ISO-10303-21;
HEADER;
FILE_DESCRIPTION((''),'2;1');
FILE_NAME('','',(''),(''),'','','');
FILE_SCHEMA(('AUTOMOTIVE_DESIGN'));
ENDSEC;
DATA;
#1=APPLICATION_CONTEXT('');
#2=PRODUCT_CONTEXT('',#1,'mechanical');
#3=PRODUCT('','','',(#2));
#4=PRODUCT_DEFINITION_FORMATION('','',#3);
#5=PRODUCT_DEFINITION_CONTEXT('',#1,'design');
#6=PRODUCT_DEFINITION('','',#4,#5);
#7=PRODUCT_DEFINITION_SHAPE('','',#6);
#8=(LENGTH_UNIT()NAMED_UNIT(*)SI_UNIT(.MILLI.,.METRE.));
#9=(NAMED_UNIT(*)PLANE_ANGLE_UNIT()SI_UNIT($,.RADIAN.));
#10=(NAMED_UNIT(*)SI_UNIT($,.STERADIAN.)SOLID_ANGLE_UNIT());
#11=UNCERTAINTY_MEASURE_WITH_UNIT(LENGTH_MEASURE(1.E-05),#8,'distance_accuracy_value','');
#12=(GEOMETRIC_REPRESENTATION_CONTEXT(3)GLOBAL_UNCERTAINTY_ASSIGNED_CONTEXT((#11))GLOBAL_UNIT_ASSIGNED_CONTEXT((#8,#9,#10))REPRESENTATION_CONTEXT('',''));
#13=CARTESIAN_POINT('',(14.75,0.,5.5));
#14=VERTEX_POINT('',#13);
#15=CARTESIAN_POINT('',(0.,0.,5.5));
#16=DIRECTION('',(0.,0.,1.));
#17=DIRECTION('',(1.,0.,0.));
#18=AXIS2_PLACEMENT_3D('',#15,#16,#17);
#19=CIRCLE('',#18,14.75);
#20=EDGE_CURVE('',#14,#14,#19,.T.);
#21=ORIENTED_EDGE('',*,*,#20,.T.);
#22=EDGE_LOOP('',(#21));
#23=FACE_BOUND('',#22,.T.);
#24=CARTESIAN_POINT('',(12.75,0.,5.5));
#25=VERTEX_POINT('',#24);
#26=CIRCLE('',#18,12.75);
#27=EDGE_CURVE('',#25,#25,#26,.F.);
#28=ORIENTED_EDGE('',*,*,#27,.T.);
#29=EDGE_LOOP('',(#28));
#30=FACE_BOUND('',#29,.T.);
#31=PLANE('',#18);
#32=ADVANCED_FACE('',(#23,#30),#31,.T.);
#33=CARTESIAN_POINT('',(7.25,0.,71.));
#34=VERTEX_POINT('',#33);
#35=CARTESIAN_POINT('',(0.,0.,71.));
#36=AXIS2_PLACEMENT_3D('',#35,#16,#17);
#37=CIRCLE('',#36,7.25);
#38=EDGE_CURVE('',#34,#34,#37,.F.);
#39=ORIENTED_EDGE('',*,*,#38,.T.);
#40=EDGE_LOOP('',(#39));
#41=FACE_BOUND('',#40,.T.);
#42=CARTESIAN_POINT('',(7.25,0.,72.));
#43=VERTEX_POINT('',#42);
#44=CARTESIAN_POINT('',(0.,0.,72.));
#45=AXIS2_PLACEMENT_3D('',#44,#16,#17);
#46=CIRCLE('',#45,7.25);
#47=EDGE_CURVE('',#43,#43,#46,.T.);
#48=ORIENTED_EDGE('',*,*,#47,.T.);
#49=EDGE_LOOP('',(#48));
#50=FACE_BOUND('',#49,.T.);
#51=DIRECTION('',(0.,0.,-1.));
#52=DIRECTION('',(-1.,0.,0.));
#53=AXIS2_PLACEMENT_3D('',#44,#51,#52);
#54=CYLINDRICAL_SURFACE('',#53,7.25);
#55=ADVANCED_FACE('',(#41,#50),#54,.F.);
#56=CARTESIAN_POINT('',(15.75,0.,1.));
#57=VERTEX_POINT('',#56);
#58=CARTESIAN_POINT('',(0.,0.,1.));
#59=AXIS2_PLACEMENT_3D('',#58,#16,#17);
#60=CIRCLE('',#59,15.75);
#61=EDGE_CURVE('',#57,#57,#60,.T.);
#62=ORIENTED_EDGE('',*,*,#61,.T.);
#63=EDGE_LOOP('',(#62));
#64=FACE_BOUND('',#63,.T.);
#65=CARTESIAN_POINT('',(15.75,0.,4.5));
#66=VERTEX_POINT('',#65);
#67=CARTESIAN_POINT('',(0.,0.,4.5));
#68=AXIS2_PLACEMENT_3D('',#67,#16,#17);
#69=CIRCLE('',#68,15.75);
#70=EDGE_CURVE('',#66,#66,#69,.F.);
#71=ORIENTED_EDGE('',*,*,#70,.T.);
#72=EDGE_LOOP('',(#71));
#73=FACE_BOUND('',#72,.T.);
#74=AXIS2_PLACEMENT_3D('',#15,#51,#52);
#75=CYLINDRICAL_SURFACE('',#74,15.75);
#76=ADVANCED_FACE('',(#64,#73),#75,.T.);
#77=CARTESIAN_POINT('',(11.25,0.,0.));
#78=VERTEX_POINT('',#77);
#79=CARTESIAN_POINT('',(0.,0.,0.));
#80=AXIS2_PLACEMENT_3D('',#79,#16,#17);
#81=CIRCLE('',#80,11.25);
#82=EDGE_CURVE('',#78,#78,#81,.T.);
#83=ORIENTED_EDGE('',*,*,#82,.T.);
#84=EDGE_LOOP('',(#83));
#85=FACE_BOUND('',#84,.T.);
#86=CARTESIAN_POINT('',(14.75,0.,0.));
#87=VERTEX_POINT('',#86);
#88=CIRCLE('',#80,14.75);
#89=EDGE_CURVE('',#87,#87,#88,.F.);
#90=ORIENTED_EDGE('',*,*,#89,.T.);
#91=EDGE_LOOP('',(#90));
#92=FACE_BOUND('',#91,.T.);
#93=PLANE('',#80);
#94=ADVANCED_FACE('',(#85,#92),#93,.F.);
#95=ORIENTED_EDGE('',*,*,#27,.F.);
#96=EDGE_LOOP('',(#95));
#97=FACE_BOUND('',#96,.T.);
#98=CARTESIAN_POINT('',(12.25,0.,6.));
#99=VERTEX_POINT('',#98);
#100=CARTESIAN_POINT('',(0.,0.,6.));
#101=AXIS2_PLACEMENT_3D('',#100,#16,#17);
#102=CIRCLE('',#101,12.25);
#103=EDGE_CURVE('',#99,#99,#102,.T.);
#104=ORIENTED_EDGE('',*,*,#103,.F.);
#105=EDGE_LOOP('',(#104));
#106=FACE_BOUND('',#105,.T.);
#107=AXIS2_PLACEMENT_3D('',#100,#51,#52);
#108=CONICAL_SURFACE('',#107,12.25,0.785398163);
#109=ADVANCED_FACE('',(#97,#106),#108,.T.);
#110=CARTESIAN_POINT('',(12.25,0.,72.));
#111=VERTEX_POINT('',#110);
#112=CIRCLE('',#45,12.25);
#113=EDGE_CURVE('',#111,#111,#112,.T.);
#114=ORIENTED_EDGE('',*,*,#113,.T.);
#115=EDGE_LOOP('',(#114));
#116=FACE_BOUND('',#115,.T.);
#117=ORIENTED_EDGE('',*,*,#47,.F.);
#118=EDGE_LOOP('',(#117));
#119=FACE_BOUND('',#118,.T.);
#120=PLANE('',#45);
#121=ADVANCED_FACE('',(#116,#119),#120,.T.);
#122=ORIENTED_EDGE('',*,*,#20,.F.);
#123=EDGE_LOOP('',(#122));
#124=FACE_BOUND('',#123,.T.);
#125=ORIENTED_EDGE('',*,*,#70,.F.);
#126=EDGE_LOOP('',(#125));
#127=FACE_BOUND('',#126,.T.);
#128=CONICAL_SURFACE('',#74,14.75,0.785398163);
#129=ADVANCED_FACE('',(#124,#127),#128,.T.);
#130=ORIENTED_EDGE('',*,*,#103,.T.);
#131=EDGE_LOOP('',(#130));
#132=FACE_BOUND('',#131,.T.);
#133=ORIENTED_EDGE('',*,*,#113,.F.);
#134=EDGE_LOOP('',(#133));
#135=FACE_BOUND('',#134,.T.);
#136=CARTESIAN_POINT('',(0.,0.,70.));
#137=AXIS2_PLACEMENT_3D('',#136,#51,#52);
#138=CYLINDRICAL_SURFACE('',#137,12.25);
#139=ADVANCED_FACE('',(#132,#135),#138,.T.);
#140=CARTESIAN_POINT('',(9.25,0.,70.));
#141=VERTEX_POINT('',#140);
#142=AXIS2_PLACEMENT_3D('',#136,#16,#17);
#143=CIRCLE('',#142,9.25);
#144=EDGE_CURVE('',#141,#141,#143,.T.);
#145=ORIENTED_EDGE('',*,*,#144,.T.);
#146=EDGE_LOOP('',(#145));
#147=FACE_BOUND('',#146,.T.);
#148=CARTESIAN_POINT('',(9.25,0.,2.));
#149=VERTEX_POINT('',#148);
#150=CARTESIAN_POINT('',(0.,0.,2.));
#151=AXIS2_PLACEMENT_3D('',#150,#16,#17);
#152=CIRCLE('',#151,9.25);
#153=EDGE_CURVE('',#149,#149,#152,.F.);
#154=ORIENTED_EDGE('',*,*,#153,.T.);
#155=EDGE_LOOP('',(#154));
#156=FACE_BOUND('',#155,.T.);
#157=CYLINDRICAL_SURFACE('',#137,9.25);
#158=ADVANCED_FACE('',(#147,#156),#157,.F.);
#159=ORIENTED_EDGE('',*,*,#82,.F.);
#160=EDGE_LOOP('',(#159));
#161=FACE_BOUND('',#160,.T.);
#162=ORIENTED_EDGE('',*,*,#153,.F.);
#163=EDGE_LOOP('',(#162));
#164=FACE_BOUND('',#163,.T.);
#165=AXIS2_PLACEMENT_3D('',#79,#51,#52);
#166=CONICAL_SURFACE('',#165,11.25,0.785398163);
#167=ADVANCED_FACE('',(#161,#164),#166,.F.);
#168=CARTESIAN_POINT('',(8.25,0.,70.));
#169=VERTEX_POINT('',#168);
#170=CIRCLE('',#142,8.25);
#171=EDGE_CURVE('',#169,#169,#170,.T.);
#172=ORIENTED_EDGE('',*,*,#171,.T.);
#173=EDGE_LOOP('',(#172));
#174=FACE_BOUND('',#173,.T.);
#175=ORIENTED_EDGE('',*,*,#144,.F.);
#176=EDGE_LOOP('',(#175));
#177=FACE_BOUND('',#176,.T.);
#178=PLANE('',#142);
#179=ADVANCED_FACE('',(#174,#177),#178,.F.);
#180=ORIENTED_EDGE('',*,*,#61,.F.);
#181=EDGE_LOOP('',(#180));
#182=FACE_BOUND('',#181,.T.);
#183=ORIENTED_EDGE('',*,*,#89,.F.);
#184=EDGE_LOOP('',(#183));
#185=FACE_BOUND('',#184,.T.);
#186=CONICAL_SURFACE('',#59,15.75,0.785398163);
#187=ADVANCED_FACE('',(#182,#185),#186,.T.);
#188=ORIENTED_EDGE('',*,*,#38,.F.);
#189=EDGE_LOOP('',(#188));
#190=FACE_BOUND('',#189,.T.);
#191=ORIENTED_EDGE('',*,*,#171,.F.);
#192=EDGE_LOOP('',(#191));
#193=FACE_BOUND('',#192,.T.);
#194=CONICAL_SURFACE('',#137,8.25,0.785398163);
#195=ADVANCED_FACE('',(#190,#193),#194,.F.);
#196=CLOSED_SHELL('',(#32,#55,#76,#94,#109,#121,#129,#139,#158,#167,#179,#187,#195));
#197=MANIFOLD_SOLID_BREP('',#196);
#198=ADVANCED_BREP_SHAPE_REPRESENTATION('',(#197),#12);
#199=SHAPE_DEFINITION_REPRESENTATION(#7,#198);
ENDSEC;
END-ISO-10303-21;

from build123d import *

# Parameters (mm, degrees)
SKETCH1_R           = 12.25
SKETCH1_R_2         = 9.25
EXTRUDE_THIN1_DEPTH = 70
SKETCH3_R           = 15.75
SKETCH3_R_2         = 10.75
EXTRUDE_THIN2_DEPTH = 5.5
SKETCH4_R           = 12.25
SKETCH4_R_2         = 7.25
EXTRUDE_THIN3_DEPTH = 2


with BuildPart() as part:
    # Sketch1 → Extrude-Thin1 (new body)
    with BuildSketch(Plane(origin=(0, 0, 0), x_dir=(0, 1, 0), z_dir=(0, 0, 1))):
        Circle(SKETCH1_R)
        Circle(SKETCH1_R_2, mode=Mode.SUBTRACT)
    extrude(amount=EXTRUDE_THIN1_DEPTH)

    # Sketch3 → Extrude-Thin2 (add)
    with BuildSketch(Plane(origin=(0, 0, 0), x_dir=(0, 1, 0), z_dir=(0, 0, 1))):
        Circle(SKETCH3_R)
        Circle(SKETCH3_R_2, mode=Mode.SUBTRACT)
    extrude(amount=EXTRUDE_THIN2_DEPTH)

    # Sketch4 → Extrude-Thin3 (add)
    with BuildSketch(Plane.XY.offset(70)):
        Circle(SKETCH4_R)
        Circle(SKETCH4_R_2, mode=Mode.SUBTRACT)
    extrude(amount=EXTRUDE_THIN3_DEPTH)

    # Chamfer1: read off the stored shape, not the designer's step
    # Chamfer1 outline → Chamfer1 (revolve, cut)
    with BuildSketch(Plane.XZ):
        Polygon((9.25, 2), (9.25, 0), (11.25, 0), align=None)
        Polygon((15.75, 1), (14.75, 0), (15.75, 0), align=None)
        Polygon((7.25, 70), (8.25, 70), (7.25, 71), align=None)
        Polygon((14.75, 5.5), (15.75, 4.5), (15.75, 5.5), align=None)
    revolve(axis=Axis((0, 0, 0), (0, 0, 1)), mode=Mode.SUBTRACT)

    # Chamfer1 2 outline → Chamfer1 2 (revolve)
    with BuildSketch(Plane.XZ):
        Polygon((12.25, 6), (12.25, 5.5), (12.75, 5.5), align=None)
    revolve(axis=Axis((0, 0, 0), (0, 0, 1)))


solid = part.part
